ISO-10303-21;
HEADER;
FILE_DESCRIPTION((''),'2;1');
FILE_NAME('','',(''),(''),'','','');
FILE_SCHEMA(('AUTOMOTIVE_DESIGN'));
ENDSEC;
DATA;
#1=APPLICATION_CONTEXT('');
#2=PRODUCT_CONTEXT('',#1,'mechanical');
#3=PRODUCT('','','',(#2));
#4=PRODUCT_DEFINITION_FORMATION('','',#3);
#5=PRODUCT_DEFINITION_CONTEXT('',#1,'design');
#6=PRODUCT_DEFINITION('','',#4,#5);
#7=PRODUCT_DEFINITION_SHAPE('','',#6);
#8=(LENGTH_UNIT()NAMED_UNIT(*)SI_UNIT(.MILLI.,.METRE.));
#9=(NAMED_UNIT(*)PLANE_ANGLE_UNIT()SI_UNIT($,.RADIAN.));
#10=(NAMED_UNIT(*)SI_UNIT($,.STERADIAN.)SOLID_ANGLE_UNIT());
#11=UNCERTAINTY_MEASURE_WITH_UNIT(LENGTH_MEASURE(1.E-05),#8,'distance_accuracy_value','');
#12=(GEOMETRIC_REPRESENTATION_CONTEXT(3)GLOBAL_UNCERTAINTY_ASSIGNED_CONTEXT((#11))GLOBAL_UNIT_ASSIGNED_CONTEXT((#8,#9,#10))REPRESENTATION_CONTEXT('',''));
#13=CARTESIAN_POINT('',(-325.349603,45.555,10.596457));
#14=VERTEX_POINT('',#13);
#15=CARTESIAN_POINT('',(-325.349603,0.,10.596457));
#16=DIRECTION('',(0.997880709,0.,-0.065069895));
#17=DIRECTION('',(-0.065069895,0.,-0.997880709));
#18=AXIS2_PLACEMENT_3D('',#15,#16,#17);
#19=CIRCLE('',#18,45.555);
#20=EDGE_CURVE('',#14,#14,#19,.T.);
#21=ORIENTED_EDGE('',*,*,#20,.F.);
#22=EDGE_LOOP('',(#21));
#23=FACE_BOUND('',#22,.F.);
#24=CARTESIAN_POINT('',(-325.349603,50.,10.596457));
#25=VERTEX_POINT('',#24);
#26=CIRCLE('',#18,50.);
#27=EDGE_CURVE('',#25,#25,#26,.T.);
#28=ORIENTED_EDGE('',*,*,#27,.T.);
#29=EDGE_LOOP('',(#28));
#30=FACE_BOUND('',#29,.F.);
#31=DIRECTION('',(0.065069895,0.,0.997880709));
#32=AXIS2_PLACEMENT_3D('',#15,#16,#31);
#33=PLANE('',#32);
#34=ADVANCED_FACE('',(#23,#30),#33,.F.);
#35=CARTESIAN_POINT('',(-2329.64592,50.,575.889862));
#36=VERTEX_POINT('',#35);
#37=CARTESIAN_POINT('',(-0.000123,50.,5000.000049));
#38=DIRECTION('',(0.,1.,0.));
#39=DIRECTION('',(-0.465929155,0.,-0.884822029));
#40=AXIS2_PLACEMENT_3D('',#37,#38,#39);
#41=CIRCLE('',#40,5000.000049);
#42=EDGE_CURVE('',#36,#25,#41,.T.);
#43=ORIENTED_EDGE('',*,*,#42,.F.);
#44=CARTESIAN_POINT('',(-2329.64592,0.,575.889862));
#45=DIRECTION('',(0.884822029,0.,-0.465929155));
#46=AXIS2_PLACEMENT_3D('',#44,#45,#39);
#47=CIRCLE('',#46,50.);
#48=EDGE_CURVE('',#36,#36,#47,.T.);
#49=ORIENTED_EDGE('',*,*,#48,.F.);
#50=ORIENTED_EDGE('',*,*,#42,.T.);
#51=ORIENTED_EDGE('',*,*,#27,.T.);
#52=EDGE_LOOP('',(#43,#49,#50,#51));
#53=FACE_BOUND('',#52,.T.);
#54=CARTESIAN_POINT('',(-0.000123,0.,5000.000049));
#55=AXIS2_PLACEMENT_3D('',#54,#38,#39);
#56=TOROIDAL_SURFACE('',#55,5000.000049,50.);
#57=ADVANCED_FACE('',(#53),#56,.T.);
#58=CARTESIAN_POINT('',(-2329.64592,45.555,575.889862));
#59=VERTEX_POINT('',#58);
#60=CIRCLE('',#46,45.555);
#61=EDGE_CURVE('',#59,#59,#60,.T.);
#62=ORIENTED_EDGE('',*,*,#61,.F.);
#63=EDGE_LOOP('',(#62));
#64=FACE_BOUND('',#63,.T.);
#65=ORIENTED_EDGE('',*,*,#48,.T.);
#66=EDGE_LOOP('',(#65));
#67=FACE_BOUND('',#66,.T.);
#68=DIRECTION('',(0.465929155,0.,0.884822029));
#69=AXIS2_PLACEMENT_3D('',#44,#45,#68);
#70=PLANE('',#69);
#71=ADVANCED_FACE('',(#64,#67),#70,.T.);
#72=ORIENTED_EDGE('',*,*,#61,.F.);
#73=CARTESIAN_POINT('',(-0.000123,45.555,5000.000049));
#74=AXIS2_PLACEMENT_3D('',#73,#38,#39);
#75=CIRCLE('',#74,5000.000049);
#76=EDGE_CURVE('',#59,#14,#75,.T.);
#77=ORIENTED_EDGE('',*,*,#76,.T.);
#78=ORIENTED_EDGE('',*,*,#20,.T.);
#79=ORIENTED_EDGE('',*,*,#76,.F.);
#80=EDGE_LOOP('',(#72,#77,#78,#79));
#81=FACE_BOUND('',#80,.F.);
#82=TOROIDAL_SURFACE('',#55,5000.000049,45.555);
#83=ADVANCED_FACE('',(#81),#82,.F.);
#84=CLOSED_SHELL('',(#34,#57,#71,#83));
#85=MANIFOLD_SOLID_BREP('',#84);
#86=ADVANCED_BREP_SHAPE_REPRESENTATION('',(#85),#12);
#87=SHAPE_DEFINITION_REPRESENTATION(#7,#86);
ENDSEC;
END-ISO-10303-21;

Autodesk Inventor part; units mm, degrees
ref_plane "YZ Plane" through (0, 0, 0) normal (1, 0, 0) x (0, 1, 0)
ref_plane "XZ Plane" through (0, 0, 0) normal (0, 1, 0) x (-1, 0, 0)
ref_plane "XY Plane" through (0, 0, 0) normal (0, 0, 1) x (1, 0, 0)
sketch "Sketch1" plane through (0, 0, 0) normal (1, 0, 0) x (0, 1, 0)
  circle A0 centre (0, 0) radius 50
  circle A1 centre (0, 0) radius 45.555
  dimension "d0" = 100
  dimension "d1" = 4.445
sketch "Sketch2" plane through (0, 0, 0) normal (0, 1, 0) x (-1, 0, 0)
  arc A0 (2329.6459, 575.8899) -> (325.3496, 10.5965) centre (0, 5000) ccw
  point P0 (0, 0)
  dimension "d2" = 10000
  dimension "d3" = 5000
sweep "Sweep1" add profiles "Sketch1" path "Sketch2"
properties part number "airgnd_exchange"
